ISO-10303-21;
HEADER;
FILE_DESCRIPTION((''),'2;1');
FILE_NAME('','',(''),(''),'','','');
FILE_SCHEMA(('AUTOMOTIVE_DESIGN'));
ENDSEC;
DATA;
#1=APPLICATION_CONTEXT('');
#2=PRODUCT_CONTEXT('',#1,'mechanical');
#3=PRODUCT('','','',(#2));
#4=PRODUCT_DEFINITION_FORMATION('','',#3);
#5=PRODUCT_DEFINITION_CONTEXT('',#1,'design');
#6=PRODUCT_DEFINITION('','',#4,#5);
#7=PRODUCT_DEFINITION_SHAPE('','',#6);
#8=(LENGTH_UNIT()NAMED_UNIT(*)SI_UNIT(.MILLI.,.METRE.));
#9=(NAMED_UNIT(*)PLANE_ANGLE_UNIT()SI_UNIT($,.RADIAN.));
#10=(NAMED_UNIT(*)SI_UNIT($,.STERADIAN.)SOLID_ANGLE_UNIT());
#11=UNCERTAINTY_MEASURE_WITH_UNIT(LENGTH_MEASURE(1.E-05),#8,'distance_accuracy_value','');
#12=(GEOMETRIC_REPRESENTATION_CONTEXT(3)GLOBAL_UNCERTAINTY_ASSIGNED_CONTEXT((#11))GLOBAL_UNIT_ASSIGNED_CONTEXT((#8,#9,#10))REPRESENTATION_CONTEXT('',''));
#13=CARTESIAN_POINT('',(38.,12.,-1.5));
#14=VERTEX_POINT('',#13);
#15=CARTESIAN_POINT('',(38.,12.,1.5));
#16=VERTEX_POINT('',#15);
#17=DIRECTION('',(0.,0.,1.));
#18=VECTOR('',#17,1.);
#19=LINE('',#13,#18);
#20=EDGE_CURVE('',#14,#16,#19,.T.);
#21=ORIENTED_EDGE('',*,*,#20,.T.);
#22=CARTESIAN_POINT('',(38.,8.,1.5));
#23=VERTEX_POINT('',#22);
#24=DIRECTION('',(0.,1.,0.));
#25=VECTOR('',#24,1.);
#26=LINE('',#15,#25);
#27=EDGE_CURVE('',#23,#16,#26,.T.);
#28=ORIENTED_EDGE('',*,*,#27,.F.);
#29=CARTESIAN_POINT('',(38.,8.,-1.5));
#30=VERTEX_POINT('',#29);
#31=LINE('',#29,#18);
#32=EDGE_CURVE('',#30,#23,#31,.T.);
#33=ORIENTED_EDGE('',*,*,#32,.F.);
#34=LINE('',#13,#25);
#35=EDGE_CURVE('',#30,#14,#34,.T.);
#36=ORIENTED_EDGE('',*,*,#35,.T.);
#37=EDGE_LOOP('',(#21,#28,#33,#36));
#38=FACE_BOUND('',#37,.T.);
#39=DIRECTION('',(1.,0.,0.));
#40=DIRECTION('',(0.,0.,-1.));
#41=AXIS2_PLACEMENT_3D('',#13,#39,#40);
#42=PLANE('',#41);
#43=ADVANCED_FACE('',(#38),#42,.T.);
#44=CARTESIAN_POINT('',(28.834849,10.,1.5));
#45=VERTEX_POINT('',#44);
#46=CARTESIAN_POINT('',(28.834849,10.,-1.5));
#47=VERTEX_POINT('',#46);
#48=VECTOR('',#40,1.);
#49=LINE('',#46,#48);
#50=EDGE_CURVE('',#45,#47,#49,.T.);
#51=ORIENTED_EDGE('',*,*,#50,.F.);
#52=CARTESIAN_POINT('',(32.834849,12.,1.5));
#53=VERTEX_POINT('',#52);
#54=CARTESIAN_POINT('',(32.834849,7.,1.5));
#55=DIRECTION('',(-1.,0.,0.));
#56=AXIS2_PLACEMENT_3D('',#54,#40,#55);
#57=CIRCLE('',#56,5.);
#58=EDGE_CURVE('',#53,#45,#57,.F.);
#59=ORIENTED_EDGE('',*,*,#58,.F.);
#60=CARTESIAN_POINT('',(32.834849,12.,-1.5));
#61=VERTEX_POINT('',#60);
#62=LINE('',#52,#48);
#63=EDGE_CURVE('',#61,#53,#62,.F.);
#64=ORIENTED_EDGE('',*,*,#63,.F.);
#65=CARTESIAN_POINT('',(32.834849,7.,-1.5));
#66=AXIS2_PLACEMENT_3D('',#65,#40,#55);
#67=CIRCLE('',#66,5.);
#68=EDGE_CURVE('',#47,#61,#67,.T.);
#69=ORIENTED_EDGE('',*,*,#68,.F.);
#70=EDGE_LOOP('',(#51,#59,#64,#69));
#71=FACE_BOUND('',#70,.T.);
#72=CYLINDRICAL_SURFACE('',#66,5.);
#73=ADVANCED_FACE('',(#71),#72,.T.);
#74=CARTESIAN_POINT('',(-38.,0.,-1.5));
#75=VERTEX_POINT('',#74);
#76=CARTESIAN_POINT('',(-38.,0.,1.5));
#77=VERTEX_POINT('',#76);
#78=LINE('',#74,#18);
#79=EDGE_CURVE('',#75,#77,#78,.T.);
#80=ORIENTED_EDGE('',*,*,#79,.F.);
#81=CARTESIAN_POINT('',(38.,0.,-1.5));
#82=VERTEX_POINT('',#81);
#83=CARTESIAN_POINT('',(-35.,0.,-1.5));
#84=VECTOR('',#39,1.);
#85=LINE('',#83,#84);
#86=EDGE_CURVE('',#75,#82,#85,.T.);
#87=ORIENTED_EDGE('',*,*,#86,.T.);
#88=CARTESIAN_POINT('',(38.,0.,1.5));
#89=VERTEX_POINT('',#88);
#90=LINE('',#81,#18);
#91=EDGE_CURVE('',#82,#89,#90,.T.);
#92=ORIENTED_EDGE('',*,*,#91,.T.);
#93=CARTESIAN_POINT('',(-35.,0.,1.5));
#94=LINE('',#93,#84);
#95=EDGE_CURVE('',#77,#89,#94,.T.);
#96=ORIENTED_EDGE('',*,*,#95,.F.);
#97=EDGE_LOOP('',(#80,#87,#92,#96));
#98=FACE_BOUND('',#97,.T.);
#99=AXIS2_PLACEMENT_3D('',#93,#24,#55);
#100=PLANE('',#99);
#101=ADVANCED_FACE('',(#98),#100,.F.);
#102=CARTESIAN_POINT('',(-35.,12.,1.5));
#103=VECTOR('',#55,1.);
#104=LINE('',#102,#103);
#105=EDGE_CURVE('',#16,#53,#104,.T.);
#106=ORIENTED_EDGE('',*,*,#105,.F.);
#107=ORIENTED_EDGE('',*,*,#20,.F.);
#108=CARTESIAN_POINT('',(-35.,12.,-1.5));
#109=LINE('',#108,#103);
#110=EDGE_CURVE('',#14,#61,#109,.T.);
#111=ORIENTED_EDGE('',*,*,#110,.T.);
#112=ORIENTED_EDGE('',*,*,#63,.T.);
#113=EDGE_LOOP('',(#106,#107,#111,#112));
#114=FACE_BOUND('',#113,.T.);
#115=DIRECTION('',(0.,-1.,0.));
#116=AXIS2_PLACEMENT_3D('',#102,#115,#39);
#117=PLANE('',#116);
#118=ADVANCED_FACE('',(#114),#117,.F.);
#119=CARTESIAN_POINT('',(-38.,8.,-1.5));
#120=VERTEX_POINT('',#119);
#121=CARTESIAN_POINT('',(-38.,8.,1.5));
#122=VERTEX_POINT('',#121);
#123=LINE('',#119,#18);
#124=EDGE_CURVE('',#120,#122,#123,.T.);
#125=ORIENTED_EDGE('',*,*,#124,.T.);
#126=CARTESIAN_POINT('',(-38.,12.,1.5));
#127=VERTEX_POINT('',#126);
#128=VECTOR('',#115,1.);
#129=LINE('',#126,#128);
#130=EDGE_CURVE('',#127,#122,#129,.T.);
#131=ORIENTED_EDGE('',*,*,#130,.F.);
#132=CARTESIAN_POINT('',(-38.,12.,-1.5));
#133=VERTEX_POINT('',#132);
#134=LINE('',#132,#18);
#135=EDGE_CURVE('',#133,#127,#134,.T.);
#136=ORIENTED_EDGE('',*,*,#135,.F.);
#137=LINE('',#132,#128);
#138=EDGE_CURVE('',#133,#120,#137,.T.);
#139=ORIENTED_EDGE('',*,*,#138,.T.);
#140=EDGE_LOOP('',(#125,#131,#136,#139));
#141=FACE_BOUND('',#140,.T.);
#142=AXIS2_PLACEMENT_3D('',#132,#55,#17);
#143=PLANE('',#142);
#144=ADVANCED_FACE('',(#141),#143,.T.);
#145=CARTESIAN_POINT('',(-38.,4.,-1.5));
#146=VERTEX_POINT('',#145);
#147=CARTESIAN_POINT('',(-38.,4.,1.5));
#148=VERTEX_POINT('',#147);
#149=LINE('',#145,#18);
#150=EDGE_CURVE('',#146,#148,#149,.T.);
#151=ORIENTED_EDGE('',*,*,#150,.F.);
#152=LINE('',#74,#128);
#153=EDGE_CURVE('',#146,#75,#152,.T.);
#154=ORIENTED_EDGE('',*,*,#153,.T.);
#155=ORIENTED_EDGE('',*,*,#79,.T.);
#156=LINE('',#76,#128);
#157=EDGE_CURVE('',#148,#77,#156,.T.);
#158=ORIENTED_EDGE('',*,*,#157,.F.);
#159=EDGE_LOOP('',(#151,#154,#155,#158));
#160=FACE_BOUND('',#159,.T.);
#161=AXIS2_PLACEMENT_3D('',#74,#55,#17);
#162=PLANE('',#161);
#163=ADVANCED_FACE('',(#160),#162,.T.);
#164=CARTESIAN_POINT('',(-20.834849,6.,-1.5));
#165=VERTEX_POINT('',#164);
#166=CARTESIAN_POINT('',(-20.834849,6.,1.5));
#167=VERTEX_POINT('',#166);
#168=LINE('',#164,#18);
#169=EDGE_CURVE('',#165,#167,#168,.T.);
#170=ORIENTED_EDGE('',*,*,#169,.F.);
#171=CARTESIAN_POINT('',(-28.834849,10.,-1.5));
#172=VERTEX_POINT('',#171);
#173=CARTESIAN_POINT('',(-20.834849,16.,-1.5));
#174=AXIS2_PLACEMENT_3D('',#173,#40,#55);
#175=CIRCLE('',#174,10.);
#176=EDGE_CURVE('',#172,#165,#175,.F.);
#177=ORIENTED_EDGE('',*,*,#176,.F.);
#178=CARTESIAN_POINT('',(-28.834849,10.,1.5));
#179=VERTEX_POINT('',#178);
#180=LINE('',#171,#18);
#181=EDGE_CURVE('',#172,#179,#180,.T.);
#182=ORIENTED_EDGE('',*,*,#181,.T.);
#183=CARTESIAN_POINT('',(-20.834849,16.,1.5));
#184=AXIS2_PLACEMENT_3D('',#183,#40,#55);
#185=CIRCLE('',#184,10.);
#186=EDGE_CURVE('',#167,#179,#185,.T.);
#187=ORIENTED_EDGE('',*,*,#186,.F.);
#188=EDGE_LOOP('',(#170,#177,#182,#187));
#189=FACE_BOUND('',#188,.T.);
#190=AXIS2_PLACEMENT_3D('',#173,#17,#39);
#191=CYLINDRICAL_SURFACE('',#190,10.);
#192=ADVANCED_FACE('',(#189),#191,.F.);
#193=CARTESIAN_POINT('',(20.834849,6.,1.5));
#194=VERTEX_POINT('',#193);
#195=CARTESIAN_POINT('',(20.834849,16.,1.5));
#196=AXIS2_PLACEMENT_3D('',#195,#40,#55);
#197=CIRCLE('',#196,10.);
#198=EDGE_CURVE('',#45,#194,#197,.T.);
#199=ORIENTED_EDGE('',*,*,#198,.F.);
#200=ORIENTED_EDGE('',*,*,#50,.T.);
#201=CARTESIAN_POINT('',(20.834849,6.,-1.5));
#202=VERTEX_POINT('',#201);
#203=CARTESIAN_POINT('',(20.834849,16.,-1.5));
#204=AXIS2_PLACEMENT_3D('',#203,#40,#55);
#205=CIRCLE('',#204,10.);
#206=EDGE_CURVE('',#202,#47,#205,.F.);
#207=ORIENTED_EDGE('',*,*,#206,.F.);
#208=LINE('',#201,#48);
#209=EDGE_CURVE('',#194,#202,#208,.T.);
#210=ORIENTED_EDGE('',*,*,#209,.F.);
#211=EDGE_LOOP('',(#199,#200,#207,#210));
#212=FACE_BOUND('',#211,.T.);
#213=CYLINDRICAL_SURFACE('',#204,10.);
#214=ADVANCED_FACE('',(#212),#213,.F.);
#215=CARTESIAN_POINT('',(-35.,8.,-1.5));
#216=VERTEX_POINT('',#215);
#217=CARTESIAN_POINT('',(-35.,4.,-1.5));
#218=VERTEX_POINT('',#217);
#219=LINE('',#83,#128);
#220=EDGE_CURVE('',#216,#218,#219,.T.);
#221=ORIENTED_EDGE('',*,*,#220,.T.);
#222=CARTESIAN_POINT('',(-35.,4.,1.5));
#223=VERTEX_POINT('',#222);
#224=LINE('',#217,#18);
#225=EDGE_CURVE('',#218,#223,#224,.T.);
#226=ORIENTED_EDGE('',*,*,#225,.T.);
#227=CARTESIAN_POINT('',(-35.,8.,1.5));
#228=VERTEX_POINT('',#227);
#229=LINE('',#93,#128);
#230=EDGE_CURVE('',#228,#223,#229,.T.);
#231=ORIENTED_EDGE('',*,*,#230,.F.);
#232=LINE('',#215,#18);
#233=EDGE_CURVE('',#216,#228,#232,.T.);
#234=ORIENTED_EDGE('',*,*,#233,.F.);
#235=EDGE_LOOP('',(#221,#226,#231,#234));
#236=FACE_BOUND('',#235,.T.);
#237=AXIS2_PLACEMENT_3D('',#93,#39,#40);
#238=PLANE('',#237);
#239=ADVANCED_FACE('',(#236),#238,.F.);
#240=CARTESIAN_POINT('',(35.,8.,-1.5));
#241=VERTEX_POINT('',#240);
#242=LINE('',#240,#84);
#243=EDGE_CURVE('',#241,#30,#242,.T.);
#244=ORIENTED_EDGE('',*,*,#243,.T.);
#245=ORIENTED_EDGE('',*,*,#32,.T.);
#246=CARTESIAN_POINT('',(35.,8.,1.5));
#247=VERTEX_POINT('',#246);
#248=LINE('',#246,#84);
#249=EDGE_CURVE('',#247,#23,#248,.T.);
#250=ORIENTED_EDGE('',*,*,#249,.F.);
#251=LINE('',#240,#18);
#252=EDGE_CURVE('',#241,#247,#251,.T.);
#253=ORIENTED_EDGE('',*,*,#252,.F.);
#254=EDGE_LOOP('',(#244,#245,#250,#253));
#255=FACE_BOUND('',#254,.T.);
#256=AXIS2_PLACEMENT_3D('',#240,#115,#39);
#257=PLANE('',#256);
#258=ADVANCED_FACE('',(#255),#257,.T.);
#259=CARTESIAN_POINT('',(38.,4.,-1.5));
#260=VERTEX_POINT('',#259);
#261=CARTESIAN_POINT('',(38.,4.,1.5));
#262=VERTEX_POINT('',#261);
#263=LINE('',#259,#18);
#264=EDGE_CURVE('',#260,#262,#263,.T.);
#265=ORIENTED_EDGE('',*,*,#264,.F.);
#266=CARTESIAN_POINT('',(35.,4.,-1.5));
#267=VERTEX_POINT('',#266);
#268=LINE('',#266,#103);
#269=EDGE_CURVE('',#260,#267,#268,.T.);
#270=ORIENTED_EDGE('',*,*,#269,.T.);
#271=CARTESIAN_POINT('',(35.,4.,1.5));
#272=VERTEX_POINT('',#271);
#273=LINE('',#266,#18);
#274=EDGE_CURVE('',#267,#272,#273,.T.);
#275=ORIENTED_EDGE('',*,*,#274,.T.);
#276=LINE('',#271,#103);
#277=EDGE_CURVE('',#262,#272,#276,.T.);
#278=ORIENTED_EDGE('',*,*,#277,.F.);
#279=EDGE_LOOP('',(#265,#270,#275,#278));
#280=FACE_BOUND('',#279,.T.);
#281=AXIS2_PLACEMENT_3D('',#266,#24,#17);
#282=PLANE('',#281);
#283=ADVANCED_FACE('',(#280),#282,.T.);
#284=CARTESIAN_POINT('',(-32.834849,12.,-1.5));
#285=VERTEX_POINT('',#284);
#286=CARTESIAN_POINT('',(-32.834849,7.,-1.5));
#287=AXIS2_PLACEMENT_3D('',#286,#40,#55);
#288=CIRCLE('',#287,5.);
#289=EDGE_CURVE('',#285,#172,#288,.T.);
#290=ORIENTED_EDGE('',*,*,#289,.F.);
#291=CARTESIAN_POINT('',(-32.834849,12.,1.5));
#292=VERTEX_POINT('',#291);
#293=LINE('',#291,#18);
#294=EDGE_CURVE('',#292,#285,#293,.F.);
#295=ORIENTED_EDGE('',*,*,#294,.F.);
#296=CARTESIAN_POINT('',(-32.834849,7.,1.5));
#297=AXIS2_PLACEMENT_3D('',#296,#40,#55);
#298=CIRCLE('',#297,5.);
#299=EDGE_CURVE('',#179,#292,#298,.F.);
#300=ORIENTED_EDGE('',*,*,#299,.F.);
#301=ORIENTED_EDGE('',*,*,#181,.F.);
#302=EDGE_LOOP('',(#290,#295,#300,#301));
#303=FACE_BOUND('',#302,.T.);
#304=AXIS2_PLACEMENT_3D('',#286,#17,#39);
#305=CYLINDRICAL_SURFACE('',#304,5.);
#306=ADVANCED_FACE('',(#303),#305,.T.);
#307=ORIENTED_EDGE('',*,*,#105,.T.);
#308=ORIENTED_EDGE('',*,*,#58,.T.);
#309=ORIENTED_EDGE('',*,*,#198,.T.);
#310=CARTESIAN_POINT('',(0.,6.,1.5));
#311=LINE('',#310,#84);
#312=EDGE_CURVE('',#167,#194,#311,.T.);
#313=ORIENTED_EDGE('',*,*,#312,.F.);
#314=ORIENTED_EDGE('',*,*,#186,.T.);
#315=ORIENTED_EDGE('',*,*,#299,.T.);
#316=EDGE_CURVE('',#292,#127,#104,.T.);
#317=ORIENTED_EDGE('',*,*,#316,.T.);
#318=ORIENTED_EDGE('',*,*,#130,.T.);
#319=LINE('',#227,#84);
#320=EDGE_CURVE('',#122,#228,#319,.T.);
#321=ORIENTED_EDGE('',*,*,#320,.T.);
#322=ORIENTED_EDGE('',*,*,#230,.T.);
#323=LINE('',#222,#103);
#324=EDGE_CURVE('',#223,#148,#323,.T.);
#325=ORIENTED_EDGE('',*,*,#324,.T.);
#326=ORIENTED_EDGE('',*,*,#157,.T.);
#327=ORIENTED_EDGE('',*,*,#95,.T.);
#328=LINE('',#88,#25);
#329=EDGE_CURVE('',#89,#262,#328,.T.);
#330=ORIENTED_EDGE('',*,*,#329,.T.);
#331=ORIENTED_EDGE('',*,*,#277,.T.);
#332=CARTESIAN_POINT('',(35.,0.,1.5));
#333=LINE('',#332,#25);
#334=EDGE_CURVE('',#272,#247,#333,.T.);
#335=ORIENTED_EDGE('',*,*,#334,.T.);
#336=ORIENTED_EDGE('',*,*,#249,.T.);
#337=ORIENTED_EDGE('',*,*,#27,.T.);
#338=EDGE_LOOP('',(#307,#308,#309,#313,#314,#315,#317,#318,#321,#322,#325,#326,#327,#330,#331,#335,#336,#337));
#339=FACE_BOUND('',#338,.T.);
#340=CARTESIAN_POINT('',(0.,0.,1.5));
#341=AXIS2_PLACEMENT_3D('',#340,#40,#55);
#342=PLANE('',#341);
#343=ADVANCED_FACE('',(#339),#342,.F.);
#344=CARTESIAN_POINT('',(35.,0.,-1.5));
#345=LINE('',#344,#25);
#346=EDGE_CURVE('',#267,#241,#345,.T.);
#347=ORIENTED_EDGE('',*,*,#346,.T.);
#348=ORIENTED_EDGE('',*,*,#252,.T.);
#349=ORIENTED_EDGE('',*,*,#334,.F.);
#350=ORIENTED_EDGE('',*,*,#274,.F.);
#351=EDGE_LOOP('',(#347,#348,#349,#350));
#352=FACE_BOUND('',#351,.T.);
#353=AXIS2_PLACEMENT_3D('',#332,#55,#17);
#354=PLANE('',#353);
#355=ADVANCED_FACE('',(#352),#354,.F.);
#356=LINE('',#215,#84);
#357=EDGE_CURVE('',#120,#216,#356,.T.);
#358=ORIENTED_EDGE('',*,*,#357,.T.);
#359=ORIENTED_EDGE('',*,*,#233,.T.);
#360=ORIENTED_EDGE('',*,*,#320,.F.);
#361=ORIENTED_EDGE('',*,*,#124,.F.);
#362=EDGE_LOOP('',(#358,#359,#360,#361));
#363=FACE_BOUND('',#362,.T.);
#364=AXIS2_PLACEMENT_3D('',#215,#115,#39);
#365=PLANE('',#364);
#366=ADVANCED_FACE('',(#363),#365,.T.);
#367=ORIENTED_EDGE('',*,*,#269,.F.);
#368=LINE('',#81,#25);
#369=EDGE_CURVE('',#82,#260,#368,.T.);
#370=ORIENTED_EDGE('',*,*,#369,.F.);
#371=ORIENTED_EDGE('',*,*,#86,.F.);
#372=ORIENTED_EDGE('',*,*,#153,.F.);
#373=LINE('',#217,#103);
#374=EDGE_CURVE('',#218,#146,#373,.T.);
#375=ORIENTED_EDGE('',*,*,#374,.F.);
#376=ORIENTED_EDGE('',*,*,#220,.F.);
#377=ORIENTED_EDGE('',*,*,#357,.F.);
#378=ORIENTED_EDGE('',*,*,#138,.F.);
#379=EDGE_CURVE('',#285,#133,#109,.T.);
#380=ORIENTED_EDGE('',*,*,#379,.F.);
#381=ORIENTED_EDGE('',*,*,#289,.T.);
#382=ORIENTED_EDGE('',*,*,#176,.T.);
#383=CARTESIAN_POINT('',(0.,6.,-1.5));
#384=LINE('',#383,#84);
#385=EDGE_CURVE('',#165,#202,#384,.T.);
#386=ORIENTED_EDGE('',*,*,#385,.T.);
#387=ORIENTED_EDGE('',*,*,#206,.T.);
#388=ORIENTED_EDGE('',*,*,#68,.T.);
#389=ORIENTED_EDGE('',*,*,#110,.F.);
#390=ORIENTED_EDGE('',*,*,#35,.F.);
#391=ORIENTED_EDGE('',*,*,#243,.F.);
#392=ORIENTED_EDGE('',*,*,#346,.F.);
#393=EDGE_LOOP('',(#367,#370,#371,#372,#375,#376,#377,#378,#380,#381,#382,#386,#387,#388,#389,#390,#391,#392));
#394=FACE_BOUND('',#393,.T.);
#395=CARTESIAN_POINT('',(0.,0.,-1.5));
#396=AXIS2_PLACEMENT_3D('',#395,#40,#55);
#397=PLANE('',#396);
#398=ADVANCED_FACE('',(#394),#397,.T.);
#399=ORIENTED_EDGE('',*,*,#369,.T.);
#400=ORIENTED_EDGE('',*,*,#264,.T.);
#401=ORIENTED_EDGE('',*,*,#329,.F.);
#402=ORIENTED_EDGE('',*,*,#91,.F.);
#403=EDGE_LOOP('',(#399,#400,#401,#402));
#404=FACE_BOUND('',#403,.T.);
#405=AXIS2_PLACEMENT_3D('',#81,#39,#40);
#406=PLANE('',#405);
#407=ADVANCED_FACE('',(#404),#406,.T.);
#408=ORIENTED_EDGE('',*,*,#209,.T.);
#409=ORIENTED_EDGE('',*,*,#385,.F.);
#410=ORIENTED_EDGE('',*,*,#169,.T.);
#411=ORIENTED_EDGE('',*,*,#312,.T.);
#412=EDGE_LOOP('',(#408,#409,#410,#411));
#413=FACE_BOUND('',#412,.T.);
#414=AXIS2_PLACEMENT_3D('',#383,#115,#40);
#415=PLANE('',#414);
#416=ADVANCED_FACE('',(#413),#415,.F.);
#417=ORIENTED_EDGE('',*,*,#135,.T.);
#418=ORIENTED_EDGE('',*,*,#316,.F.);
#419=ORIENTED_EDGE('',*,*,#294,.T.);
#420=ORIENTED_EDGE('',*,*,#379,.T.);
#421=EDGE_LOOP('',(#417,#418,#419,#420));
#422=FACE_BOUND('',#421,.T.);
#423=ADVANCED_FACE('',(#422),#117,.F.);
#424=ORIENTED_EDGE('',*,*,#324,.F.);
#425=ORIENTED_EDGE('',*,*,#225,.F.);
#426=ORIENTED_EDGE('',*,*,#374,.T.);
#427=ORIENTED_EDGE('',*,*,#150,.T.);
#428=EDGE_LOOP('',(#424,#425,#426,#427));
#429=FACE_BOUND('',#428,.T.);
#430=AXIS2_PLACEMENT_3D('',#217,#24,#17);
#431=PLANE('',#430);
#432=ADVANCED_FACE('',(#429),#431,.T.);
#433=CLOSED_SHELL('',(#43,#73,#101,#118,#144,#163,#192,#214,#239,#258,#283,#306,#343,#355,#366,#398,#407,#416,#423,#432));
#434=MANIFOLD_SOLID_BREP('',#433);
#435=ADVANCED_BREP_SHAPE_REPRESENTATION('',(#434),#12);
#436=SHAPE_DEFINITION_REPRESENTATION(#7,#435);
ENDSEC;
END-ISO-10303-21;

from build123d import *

# Parameters (mm, degrees)
SKETCH1_W           = 70
SKETCH1_H           = 12
BOSS_EXTRUDE1_DEPTH = 1.5
SKETCH2_W           = 60
SKETCH2_H           = 6
CUT_EXTRUDE1_DEPTH  = 38.121422387
FILLET1_R           = 10
FILLET2_R           = 5
SKETCH3_W           = 3
SKETCH3_H           = 4
BOSS_EXTRUDE2_DEPTH = 3


with BuildPart() as part:
    # Sketch1 → Boss-Extrude1 (new, symmetric)
    with BuildSketch(Plane.XY):
        with Locations((0, 6)):
            Rectangle(SKETCH1_W, SKETCH1_H)
    extrude(amount=BOSS_EXTRUDE1_DEPTH, both=True)

    # Sketch2 → Cut-Extrude1 (cut, through all)
    with BuildSketch(Plane.XY.offset(1.5)):
        with Locations((0, 9)):
            Rectangle(SKETCH2_W, SKETCH2_H)
    extrude(amount=-CUT_EXTRUDE1_DEPTH, mode=Mode.SUBTRACT)

    # Fillet1
    # the kernel refuses this fillet: 10 mm, written as the material it adds along each edge
    with BuildSketch(Plane(origin=(30, 6, 1.5), x_dir=(-1, 0, 0), z_dir=(0, 0, -1))) as fillet1_piece_1:
        with BuildLine():
            CenterArc((9.16515139, 10), FILLET1_R, 203.578178478, 66.421821522)
            Line((0, 6), (-0.183303028, 5.92))
            ThreePointArc((-0.183303028, 5.92), (-0.2, 3), (-0.2, 0))
            Line((-0.2, 0), (0, -0.2))
            Line((0, -0.2), (9.16515139, -0.2))
            Line((9.16515139, -0.2), (9.16515139, 0))
        make_face()
    extrude(amount=3)
    with BuildSketch(Plane(origin=(-30, 6, 1.5), x_dir=(0, 1, 0), z_dir=(0, 0, -1))) as fillet1_piece_2:
        with BuildLine():
            CenterArc((10, 9.16515139), FILLET1_R, 180, 66.421821522)
            Line((0, 9.16515139), (-0.2, 9.16515139))
            Line((-0.2, 9.16515139), (-0.2, 0))
            Line((-0.2, 0), (0, -0.2))
            ThreePointArc((0, -0.2), (3, -0.2), (5.92, -0.183303028))
            Line((5.92, -0.183303028), (6, 0))
        make_face()
    extrude(amount=3)

    # Fillet2
    fillet2_edges = [part.edges().sort_by_distance(p)[0] for p in [
        (-30, 12, 0),
        (30, 12, 0),
    ]]
    fillet(fillet2_edges, radius=FILLET2_R)

    # Sketch3 → Boss-Extrude2 (add)
    with BuildSketch(Plane.XY.offset(1.5)):
        with Locations((36.5, 10)):
            Rectangle(SKETCH3_W, SKETCH3_H)
        with Locations((36.5, 2)):
            Rectangle(SKETCH3_W, SKETCH3_H)
        with Locations((-36.5, 2)):
            Rectangle(SKETCH3_W, SKETCH3_H)
        with Locations((-36.5, 10)):
            Rectangle(SKETCH3_W, SKETCH3_H)
    extrude(amount=-BOSS_EXTRUDE2_DEPTH)


solid = part.part
